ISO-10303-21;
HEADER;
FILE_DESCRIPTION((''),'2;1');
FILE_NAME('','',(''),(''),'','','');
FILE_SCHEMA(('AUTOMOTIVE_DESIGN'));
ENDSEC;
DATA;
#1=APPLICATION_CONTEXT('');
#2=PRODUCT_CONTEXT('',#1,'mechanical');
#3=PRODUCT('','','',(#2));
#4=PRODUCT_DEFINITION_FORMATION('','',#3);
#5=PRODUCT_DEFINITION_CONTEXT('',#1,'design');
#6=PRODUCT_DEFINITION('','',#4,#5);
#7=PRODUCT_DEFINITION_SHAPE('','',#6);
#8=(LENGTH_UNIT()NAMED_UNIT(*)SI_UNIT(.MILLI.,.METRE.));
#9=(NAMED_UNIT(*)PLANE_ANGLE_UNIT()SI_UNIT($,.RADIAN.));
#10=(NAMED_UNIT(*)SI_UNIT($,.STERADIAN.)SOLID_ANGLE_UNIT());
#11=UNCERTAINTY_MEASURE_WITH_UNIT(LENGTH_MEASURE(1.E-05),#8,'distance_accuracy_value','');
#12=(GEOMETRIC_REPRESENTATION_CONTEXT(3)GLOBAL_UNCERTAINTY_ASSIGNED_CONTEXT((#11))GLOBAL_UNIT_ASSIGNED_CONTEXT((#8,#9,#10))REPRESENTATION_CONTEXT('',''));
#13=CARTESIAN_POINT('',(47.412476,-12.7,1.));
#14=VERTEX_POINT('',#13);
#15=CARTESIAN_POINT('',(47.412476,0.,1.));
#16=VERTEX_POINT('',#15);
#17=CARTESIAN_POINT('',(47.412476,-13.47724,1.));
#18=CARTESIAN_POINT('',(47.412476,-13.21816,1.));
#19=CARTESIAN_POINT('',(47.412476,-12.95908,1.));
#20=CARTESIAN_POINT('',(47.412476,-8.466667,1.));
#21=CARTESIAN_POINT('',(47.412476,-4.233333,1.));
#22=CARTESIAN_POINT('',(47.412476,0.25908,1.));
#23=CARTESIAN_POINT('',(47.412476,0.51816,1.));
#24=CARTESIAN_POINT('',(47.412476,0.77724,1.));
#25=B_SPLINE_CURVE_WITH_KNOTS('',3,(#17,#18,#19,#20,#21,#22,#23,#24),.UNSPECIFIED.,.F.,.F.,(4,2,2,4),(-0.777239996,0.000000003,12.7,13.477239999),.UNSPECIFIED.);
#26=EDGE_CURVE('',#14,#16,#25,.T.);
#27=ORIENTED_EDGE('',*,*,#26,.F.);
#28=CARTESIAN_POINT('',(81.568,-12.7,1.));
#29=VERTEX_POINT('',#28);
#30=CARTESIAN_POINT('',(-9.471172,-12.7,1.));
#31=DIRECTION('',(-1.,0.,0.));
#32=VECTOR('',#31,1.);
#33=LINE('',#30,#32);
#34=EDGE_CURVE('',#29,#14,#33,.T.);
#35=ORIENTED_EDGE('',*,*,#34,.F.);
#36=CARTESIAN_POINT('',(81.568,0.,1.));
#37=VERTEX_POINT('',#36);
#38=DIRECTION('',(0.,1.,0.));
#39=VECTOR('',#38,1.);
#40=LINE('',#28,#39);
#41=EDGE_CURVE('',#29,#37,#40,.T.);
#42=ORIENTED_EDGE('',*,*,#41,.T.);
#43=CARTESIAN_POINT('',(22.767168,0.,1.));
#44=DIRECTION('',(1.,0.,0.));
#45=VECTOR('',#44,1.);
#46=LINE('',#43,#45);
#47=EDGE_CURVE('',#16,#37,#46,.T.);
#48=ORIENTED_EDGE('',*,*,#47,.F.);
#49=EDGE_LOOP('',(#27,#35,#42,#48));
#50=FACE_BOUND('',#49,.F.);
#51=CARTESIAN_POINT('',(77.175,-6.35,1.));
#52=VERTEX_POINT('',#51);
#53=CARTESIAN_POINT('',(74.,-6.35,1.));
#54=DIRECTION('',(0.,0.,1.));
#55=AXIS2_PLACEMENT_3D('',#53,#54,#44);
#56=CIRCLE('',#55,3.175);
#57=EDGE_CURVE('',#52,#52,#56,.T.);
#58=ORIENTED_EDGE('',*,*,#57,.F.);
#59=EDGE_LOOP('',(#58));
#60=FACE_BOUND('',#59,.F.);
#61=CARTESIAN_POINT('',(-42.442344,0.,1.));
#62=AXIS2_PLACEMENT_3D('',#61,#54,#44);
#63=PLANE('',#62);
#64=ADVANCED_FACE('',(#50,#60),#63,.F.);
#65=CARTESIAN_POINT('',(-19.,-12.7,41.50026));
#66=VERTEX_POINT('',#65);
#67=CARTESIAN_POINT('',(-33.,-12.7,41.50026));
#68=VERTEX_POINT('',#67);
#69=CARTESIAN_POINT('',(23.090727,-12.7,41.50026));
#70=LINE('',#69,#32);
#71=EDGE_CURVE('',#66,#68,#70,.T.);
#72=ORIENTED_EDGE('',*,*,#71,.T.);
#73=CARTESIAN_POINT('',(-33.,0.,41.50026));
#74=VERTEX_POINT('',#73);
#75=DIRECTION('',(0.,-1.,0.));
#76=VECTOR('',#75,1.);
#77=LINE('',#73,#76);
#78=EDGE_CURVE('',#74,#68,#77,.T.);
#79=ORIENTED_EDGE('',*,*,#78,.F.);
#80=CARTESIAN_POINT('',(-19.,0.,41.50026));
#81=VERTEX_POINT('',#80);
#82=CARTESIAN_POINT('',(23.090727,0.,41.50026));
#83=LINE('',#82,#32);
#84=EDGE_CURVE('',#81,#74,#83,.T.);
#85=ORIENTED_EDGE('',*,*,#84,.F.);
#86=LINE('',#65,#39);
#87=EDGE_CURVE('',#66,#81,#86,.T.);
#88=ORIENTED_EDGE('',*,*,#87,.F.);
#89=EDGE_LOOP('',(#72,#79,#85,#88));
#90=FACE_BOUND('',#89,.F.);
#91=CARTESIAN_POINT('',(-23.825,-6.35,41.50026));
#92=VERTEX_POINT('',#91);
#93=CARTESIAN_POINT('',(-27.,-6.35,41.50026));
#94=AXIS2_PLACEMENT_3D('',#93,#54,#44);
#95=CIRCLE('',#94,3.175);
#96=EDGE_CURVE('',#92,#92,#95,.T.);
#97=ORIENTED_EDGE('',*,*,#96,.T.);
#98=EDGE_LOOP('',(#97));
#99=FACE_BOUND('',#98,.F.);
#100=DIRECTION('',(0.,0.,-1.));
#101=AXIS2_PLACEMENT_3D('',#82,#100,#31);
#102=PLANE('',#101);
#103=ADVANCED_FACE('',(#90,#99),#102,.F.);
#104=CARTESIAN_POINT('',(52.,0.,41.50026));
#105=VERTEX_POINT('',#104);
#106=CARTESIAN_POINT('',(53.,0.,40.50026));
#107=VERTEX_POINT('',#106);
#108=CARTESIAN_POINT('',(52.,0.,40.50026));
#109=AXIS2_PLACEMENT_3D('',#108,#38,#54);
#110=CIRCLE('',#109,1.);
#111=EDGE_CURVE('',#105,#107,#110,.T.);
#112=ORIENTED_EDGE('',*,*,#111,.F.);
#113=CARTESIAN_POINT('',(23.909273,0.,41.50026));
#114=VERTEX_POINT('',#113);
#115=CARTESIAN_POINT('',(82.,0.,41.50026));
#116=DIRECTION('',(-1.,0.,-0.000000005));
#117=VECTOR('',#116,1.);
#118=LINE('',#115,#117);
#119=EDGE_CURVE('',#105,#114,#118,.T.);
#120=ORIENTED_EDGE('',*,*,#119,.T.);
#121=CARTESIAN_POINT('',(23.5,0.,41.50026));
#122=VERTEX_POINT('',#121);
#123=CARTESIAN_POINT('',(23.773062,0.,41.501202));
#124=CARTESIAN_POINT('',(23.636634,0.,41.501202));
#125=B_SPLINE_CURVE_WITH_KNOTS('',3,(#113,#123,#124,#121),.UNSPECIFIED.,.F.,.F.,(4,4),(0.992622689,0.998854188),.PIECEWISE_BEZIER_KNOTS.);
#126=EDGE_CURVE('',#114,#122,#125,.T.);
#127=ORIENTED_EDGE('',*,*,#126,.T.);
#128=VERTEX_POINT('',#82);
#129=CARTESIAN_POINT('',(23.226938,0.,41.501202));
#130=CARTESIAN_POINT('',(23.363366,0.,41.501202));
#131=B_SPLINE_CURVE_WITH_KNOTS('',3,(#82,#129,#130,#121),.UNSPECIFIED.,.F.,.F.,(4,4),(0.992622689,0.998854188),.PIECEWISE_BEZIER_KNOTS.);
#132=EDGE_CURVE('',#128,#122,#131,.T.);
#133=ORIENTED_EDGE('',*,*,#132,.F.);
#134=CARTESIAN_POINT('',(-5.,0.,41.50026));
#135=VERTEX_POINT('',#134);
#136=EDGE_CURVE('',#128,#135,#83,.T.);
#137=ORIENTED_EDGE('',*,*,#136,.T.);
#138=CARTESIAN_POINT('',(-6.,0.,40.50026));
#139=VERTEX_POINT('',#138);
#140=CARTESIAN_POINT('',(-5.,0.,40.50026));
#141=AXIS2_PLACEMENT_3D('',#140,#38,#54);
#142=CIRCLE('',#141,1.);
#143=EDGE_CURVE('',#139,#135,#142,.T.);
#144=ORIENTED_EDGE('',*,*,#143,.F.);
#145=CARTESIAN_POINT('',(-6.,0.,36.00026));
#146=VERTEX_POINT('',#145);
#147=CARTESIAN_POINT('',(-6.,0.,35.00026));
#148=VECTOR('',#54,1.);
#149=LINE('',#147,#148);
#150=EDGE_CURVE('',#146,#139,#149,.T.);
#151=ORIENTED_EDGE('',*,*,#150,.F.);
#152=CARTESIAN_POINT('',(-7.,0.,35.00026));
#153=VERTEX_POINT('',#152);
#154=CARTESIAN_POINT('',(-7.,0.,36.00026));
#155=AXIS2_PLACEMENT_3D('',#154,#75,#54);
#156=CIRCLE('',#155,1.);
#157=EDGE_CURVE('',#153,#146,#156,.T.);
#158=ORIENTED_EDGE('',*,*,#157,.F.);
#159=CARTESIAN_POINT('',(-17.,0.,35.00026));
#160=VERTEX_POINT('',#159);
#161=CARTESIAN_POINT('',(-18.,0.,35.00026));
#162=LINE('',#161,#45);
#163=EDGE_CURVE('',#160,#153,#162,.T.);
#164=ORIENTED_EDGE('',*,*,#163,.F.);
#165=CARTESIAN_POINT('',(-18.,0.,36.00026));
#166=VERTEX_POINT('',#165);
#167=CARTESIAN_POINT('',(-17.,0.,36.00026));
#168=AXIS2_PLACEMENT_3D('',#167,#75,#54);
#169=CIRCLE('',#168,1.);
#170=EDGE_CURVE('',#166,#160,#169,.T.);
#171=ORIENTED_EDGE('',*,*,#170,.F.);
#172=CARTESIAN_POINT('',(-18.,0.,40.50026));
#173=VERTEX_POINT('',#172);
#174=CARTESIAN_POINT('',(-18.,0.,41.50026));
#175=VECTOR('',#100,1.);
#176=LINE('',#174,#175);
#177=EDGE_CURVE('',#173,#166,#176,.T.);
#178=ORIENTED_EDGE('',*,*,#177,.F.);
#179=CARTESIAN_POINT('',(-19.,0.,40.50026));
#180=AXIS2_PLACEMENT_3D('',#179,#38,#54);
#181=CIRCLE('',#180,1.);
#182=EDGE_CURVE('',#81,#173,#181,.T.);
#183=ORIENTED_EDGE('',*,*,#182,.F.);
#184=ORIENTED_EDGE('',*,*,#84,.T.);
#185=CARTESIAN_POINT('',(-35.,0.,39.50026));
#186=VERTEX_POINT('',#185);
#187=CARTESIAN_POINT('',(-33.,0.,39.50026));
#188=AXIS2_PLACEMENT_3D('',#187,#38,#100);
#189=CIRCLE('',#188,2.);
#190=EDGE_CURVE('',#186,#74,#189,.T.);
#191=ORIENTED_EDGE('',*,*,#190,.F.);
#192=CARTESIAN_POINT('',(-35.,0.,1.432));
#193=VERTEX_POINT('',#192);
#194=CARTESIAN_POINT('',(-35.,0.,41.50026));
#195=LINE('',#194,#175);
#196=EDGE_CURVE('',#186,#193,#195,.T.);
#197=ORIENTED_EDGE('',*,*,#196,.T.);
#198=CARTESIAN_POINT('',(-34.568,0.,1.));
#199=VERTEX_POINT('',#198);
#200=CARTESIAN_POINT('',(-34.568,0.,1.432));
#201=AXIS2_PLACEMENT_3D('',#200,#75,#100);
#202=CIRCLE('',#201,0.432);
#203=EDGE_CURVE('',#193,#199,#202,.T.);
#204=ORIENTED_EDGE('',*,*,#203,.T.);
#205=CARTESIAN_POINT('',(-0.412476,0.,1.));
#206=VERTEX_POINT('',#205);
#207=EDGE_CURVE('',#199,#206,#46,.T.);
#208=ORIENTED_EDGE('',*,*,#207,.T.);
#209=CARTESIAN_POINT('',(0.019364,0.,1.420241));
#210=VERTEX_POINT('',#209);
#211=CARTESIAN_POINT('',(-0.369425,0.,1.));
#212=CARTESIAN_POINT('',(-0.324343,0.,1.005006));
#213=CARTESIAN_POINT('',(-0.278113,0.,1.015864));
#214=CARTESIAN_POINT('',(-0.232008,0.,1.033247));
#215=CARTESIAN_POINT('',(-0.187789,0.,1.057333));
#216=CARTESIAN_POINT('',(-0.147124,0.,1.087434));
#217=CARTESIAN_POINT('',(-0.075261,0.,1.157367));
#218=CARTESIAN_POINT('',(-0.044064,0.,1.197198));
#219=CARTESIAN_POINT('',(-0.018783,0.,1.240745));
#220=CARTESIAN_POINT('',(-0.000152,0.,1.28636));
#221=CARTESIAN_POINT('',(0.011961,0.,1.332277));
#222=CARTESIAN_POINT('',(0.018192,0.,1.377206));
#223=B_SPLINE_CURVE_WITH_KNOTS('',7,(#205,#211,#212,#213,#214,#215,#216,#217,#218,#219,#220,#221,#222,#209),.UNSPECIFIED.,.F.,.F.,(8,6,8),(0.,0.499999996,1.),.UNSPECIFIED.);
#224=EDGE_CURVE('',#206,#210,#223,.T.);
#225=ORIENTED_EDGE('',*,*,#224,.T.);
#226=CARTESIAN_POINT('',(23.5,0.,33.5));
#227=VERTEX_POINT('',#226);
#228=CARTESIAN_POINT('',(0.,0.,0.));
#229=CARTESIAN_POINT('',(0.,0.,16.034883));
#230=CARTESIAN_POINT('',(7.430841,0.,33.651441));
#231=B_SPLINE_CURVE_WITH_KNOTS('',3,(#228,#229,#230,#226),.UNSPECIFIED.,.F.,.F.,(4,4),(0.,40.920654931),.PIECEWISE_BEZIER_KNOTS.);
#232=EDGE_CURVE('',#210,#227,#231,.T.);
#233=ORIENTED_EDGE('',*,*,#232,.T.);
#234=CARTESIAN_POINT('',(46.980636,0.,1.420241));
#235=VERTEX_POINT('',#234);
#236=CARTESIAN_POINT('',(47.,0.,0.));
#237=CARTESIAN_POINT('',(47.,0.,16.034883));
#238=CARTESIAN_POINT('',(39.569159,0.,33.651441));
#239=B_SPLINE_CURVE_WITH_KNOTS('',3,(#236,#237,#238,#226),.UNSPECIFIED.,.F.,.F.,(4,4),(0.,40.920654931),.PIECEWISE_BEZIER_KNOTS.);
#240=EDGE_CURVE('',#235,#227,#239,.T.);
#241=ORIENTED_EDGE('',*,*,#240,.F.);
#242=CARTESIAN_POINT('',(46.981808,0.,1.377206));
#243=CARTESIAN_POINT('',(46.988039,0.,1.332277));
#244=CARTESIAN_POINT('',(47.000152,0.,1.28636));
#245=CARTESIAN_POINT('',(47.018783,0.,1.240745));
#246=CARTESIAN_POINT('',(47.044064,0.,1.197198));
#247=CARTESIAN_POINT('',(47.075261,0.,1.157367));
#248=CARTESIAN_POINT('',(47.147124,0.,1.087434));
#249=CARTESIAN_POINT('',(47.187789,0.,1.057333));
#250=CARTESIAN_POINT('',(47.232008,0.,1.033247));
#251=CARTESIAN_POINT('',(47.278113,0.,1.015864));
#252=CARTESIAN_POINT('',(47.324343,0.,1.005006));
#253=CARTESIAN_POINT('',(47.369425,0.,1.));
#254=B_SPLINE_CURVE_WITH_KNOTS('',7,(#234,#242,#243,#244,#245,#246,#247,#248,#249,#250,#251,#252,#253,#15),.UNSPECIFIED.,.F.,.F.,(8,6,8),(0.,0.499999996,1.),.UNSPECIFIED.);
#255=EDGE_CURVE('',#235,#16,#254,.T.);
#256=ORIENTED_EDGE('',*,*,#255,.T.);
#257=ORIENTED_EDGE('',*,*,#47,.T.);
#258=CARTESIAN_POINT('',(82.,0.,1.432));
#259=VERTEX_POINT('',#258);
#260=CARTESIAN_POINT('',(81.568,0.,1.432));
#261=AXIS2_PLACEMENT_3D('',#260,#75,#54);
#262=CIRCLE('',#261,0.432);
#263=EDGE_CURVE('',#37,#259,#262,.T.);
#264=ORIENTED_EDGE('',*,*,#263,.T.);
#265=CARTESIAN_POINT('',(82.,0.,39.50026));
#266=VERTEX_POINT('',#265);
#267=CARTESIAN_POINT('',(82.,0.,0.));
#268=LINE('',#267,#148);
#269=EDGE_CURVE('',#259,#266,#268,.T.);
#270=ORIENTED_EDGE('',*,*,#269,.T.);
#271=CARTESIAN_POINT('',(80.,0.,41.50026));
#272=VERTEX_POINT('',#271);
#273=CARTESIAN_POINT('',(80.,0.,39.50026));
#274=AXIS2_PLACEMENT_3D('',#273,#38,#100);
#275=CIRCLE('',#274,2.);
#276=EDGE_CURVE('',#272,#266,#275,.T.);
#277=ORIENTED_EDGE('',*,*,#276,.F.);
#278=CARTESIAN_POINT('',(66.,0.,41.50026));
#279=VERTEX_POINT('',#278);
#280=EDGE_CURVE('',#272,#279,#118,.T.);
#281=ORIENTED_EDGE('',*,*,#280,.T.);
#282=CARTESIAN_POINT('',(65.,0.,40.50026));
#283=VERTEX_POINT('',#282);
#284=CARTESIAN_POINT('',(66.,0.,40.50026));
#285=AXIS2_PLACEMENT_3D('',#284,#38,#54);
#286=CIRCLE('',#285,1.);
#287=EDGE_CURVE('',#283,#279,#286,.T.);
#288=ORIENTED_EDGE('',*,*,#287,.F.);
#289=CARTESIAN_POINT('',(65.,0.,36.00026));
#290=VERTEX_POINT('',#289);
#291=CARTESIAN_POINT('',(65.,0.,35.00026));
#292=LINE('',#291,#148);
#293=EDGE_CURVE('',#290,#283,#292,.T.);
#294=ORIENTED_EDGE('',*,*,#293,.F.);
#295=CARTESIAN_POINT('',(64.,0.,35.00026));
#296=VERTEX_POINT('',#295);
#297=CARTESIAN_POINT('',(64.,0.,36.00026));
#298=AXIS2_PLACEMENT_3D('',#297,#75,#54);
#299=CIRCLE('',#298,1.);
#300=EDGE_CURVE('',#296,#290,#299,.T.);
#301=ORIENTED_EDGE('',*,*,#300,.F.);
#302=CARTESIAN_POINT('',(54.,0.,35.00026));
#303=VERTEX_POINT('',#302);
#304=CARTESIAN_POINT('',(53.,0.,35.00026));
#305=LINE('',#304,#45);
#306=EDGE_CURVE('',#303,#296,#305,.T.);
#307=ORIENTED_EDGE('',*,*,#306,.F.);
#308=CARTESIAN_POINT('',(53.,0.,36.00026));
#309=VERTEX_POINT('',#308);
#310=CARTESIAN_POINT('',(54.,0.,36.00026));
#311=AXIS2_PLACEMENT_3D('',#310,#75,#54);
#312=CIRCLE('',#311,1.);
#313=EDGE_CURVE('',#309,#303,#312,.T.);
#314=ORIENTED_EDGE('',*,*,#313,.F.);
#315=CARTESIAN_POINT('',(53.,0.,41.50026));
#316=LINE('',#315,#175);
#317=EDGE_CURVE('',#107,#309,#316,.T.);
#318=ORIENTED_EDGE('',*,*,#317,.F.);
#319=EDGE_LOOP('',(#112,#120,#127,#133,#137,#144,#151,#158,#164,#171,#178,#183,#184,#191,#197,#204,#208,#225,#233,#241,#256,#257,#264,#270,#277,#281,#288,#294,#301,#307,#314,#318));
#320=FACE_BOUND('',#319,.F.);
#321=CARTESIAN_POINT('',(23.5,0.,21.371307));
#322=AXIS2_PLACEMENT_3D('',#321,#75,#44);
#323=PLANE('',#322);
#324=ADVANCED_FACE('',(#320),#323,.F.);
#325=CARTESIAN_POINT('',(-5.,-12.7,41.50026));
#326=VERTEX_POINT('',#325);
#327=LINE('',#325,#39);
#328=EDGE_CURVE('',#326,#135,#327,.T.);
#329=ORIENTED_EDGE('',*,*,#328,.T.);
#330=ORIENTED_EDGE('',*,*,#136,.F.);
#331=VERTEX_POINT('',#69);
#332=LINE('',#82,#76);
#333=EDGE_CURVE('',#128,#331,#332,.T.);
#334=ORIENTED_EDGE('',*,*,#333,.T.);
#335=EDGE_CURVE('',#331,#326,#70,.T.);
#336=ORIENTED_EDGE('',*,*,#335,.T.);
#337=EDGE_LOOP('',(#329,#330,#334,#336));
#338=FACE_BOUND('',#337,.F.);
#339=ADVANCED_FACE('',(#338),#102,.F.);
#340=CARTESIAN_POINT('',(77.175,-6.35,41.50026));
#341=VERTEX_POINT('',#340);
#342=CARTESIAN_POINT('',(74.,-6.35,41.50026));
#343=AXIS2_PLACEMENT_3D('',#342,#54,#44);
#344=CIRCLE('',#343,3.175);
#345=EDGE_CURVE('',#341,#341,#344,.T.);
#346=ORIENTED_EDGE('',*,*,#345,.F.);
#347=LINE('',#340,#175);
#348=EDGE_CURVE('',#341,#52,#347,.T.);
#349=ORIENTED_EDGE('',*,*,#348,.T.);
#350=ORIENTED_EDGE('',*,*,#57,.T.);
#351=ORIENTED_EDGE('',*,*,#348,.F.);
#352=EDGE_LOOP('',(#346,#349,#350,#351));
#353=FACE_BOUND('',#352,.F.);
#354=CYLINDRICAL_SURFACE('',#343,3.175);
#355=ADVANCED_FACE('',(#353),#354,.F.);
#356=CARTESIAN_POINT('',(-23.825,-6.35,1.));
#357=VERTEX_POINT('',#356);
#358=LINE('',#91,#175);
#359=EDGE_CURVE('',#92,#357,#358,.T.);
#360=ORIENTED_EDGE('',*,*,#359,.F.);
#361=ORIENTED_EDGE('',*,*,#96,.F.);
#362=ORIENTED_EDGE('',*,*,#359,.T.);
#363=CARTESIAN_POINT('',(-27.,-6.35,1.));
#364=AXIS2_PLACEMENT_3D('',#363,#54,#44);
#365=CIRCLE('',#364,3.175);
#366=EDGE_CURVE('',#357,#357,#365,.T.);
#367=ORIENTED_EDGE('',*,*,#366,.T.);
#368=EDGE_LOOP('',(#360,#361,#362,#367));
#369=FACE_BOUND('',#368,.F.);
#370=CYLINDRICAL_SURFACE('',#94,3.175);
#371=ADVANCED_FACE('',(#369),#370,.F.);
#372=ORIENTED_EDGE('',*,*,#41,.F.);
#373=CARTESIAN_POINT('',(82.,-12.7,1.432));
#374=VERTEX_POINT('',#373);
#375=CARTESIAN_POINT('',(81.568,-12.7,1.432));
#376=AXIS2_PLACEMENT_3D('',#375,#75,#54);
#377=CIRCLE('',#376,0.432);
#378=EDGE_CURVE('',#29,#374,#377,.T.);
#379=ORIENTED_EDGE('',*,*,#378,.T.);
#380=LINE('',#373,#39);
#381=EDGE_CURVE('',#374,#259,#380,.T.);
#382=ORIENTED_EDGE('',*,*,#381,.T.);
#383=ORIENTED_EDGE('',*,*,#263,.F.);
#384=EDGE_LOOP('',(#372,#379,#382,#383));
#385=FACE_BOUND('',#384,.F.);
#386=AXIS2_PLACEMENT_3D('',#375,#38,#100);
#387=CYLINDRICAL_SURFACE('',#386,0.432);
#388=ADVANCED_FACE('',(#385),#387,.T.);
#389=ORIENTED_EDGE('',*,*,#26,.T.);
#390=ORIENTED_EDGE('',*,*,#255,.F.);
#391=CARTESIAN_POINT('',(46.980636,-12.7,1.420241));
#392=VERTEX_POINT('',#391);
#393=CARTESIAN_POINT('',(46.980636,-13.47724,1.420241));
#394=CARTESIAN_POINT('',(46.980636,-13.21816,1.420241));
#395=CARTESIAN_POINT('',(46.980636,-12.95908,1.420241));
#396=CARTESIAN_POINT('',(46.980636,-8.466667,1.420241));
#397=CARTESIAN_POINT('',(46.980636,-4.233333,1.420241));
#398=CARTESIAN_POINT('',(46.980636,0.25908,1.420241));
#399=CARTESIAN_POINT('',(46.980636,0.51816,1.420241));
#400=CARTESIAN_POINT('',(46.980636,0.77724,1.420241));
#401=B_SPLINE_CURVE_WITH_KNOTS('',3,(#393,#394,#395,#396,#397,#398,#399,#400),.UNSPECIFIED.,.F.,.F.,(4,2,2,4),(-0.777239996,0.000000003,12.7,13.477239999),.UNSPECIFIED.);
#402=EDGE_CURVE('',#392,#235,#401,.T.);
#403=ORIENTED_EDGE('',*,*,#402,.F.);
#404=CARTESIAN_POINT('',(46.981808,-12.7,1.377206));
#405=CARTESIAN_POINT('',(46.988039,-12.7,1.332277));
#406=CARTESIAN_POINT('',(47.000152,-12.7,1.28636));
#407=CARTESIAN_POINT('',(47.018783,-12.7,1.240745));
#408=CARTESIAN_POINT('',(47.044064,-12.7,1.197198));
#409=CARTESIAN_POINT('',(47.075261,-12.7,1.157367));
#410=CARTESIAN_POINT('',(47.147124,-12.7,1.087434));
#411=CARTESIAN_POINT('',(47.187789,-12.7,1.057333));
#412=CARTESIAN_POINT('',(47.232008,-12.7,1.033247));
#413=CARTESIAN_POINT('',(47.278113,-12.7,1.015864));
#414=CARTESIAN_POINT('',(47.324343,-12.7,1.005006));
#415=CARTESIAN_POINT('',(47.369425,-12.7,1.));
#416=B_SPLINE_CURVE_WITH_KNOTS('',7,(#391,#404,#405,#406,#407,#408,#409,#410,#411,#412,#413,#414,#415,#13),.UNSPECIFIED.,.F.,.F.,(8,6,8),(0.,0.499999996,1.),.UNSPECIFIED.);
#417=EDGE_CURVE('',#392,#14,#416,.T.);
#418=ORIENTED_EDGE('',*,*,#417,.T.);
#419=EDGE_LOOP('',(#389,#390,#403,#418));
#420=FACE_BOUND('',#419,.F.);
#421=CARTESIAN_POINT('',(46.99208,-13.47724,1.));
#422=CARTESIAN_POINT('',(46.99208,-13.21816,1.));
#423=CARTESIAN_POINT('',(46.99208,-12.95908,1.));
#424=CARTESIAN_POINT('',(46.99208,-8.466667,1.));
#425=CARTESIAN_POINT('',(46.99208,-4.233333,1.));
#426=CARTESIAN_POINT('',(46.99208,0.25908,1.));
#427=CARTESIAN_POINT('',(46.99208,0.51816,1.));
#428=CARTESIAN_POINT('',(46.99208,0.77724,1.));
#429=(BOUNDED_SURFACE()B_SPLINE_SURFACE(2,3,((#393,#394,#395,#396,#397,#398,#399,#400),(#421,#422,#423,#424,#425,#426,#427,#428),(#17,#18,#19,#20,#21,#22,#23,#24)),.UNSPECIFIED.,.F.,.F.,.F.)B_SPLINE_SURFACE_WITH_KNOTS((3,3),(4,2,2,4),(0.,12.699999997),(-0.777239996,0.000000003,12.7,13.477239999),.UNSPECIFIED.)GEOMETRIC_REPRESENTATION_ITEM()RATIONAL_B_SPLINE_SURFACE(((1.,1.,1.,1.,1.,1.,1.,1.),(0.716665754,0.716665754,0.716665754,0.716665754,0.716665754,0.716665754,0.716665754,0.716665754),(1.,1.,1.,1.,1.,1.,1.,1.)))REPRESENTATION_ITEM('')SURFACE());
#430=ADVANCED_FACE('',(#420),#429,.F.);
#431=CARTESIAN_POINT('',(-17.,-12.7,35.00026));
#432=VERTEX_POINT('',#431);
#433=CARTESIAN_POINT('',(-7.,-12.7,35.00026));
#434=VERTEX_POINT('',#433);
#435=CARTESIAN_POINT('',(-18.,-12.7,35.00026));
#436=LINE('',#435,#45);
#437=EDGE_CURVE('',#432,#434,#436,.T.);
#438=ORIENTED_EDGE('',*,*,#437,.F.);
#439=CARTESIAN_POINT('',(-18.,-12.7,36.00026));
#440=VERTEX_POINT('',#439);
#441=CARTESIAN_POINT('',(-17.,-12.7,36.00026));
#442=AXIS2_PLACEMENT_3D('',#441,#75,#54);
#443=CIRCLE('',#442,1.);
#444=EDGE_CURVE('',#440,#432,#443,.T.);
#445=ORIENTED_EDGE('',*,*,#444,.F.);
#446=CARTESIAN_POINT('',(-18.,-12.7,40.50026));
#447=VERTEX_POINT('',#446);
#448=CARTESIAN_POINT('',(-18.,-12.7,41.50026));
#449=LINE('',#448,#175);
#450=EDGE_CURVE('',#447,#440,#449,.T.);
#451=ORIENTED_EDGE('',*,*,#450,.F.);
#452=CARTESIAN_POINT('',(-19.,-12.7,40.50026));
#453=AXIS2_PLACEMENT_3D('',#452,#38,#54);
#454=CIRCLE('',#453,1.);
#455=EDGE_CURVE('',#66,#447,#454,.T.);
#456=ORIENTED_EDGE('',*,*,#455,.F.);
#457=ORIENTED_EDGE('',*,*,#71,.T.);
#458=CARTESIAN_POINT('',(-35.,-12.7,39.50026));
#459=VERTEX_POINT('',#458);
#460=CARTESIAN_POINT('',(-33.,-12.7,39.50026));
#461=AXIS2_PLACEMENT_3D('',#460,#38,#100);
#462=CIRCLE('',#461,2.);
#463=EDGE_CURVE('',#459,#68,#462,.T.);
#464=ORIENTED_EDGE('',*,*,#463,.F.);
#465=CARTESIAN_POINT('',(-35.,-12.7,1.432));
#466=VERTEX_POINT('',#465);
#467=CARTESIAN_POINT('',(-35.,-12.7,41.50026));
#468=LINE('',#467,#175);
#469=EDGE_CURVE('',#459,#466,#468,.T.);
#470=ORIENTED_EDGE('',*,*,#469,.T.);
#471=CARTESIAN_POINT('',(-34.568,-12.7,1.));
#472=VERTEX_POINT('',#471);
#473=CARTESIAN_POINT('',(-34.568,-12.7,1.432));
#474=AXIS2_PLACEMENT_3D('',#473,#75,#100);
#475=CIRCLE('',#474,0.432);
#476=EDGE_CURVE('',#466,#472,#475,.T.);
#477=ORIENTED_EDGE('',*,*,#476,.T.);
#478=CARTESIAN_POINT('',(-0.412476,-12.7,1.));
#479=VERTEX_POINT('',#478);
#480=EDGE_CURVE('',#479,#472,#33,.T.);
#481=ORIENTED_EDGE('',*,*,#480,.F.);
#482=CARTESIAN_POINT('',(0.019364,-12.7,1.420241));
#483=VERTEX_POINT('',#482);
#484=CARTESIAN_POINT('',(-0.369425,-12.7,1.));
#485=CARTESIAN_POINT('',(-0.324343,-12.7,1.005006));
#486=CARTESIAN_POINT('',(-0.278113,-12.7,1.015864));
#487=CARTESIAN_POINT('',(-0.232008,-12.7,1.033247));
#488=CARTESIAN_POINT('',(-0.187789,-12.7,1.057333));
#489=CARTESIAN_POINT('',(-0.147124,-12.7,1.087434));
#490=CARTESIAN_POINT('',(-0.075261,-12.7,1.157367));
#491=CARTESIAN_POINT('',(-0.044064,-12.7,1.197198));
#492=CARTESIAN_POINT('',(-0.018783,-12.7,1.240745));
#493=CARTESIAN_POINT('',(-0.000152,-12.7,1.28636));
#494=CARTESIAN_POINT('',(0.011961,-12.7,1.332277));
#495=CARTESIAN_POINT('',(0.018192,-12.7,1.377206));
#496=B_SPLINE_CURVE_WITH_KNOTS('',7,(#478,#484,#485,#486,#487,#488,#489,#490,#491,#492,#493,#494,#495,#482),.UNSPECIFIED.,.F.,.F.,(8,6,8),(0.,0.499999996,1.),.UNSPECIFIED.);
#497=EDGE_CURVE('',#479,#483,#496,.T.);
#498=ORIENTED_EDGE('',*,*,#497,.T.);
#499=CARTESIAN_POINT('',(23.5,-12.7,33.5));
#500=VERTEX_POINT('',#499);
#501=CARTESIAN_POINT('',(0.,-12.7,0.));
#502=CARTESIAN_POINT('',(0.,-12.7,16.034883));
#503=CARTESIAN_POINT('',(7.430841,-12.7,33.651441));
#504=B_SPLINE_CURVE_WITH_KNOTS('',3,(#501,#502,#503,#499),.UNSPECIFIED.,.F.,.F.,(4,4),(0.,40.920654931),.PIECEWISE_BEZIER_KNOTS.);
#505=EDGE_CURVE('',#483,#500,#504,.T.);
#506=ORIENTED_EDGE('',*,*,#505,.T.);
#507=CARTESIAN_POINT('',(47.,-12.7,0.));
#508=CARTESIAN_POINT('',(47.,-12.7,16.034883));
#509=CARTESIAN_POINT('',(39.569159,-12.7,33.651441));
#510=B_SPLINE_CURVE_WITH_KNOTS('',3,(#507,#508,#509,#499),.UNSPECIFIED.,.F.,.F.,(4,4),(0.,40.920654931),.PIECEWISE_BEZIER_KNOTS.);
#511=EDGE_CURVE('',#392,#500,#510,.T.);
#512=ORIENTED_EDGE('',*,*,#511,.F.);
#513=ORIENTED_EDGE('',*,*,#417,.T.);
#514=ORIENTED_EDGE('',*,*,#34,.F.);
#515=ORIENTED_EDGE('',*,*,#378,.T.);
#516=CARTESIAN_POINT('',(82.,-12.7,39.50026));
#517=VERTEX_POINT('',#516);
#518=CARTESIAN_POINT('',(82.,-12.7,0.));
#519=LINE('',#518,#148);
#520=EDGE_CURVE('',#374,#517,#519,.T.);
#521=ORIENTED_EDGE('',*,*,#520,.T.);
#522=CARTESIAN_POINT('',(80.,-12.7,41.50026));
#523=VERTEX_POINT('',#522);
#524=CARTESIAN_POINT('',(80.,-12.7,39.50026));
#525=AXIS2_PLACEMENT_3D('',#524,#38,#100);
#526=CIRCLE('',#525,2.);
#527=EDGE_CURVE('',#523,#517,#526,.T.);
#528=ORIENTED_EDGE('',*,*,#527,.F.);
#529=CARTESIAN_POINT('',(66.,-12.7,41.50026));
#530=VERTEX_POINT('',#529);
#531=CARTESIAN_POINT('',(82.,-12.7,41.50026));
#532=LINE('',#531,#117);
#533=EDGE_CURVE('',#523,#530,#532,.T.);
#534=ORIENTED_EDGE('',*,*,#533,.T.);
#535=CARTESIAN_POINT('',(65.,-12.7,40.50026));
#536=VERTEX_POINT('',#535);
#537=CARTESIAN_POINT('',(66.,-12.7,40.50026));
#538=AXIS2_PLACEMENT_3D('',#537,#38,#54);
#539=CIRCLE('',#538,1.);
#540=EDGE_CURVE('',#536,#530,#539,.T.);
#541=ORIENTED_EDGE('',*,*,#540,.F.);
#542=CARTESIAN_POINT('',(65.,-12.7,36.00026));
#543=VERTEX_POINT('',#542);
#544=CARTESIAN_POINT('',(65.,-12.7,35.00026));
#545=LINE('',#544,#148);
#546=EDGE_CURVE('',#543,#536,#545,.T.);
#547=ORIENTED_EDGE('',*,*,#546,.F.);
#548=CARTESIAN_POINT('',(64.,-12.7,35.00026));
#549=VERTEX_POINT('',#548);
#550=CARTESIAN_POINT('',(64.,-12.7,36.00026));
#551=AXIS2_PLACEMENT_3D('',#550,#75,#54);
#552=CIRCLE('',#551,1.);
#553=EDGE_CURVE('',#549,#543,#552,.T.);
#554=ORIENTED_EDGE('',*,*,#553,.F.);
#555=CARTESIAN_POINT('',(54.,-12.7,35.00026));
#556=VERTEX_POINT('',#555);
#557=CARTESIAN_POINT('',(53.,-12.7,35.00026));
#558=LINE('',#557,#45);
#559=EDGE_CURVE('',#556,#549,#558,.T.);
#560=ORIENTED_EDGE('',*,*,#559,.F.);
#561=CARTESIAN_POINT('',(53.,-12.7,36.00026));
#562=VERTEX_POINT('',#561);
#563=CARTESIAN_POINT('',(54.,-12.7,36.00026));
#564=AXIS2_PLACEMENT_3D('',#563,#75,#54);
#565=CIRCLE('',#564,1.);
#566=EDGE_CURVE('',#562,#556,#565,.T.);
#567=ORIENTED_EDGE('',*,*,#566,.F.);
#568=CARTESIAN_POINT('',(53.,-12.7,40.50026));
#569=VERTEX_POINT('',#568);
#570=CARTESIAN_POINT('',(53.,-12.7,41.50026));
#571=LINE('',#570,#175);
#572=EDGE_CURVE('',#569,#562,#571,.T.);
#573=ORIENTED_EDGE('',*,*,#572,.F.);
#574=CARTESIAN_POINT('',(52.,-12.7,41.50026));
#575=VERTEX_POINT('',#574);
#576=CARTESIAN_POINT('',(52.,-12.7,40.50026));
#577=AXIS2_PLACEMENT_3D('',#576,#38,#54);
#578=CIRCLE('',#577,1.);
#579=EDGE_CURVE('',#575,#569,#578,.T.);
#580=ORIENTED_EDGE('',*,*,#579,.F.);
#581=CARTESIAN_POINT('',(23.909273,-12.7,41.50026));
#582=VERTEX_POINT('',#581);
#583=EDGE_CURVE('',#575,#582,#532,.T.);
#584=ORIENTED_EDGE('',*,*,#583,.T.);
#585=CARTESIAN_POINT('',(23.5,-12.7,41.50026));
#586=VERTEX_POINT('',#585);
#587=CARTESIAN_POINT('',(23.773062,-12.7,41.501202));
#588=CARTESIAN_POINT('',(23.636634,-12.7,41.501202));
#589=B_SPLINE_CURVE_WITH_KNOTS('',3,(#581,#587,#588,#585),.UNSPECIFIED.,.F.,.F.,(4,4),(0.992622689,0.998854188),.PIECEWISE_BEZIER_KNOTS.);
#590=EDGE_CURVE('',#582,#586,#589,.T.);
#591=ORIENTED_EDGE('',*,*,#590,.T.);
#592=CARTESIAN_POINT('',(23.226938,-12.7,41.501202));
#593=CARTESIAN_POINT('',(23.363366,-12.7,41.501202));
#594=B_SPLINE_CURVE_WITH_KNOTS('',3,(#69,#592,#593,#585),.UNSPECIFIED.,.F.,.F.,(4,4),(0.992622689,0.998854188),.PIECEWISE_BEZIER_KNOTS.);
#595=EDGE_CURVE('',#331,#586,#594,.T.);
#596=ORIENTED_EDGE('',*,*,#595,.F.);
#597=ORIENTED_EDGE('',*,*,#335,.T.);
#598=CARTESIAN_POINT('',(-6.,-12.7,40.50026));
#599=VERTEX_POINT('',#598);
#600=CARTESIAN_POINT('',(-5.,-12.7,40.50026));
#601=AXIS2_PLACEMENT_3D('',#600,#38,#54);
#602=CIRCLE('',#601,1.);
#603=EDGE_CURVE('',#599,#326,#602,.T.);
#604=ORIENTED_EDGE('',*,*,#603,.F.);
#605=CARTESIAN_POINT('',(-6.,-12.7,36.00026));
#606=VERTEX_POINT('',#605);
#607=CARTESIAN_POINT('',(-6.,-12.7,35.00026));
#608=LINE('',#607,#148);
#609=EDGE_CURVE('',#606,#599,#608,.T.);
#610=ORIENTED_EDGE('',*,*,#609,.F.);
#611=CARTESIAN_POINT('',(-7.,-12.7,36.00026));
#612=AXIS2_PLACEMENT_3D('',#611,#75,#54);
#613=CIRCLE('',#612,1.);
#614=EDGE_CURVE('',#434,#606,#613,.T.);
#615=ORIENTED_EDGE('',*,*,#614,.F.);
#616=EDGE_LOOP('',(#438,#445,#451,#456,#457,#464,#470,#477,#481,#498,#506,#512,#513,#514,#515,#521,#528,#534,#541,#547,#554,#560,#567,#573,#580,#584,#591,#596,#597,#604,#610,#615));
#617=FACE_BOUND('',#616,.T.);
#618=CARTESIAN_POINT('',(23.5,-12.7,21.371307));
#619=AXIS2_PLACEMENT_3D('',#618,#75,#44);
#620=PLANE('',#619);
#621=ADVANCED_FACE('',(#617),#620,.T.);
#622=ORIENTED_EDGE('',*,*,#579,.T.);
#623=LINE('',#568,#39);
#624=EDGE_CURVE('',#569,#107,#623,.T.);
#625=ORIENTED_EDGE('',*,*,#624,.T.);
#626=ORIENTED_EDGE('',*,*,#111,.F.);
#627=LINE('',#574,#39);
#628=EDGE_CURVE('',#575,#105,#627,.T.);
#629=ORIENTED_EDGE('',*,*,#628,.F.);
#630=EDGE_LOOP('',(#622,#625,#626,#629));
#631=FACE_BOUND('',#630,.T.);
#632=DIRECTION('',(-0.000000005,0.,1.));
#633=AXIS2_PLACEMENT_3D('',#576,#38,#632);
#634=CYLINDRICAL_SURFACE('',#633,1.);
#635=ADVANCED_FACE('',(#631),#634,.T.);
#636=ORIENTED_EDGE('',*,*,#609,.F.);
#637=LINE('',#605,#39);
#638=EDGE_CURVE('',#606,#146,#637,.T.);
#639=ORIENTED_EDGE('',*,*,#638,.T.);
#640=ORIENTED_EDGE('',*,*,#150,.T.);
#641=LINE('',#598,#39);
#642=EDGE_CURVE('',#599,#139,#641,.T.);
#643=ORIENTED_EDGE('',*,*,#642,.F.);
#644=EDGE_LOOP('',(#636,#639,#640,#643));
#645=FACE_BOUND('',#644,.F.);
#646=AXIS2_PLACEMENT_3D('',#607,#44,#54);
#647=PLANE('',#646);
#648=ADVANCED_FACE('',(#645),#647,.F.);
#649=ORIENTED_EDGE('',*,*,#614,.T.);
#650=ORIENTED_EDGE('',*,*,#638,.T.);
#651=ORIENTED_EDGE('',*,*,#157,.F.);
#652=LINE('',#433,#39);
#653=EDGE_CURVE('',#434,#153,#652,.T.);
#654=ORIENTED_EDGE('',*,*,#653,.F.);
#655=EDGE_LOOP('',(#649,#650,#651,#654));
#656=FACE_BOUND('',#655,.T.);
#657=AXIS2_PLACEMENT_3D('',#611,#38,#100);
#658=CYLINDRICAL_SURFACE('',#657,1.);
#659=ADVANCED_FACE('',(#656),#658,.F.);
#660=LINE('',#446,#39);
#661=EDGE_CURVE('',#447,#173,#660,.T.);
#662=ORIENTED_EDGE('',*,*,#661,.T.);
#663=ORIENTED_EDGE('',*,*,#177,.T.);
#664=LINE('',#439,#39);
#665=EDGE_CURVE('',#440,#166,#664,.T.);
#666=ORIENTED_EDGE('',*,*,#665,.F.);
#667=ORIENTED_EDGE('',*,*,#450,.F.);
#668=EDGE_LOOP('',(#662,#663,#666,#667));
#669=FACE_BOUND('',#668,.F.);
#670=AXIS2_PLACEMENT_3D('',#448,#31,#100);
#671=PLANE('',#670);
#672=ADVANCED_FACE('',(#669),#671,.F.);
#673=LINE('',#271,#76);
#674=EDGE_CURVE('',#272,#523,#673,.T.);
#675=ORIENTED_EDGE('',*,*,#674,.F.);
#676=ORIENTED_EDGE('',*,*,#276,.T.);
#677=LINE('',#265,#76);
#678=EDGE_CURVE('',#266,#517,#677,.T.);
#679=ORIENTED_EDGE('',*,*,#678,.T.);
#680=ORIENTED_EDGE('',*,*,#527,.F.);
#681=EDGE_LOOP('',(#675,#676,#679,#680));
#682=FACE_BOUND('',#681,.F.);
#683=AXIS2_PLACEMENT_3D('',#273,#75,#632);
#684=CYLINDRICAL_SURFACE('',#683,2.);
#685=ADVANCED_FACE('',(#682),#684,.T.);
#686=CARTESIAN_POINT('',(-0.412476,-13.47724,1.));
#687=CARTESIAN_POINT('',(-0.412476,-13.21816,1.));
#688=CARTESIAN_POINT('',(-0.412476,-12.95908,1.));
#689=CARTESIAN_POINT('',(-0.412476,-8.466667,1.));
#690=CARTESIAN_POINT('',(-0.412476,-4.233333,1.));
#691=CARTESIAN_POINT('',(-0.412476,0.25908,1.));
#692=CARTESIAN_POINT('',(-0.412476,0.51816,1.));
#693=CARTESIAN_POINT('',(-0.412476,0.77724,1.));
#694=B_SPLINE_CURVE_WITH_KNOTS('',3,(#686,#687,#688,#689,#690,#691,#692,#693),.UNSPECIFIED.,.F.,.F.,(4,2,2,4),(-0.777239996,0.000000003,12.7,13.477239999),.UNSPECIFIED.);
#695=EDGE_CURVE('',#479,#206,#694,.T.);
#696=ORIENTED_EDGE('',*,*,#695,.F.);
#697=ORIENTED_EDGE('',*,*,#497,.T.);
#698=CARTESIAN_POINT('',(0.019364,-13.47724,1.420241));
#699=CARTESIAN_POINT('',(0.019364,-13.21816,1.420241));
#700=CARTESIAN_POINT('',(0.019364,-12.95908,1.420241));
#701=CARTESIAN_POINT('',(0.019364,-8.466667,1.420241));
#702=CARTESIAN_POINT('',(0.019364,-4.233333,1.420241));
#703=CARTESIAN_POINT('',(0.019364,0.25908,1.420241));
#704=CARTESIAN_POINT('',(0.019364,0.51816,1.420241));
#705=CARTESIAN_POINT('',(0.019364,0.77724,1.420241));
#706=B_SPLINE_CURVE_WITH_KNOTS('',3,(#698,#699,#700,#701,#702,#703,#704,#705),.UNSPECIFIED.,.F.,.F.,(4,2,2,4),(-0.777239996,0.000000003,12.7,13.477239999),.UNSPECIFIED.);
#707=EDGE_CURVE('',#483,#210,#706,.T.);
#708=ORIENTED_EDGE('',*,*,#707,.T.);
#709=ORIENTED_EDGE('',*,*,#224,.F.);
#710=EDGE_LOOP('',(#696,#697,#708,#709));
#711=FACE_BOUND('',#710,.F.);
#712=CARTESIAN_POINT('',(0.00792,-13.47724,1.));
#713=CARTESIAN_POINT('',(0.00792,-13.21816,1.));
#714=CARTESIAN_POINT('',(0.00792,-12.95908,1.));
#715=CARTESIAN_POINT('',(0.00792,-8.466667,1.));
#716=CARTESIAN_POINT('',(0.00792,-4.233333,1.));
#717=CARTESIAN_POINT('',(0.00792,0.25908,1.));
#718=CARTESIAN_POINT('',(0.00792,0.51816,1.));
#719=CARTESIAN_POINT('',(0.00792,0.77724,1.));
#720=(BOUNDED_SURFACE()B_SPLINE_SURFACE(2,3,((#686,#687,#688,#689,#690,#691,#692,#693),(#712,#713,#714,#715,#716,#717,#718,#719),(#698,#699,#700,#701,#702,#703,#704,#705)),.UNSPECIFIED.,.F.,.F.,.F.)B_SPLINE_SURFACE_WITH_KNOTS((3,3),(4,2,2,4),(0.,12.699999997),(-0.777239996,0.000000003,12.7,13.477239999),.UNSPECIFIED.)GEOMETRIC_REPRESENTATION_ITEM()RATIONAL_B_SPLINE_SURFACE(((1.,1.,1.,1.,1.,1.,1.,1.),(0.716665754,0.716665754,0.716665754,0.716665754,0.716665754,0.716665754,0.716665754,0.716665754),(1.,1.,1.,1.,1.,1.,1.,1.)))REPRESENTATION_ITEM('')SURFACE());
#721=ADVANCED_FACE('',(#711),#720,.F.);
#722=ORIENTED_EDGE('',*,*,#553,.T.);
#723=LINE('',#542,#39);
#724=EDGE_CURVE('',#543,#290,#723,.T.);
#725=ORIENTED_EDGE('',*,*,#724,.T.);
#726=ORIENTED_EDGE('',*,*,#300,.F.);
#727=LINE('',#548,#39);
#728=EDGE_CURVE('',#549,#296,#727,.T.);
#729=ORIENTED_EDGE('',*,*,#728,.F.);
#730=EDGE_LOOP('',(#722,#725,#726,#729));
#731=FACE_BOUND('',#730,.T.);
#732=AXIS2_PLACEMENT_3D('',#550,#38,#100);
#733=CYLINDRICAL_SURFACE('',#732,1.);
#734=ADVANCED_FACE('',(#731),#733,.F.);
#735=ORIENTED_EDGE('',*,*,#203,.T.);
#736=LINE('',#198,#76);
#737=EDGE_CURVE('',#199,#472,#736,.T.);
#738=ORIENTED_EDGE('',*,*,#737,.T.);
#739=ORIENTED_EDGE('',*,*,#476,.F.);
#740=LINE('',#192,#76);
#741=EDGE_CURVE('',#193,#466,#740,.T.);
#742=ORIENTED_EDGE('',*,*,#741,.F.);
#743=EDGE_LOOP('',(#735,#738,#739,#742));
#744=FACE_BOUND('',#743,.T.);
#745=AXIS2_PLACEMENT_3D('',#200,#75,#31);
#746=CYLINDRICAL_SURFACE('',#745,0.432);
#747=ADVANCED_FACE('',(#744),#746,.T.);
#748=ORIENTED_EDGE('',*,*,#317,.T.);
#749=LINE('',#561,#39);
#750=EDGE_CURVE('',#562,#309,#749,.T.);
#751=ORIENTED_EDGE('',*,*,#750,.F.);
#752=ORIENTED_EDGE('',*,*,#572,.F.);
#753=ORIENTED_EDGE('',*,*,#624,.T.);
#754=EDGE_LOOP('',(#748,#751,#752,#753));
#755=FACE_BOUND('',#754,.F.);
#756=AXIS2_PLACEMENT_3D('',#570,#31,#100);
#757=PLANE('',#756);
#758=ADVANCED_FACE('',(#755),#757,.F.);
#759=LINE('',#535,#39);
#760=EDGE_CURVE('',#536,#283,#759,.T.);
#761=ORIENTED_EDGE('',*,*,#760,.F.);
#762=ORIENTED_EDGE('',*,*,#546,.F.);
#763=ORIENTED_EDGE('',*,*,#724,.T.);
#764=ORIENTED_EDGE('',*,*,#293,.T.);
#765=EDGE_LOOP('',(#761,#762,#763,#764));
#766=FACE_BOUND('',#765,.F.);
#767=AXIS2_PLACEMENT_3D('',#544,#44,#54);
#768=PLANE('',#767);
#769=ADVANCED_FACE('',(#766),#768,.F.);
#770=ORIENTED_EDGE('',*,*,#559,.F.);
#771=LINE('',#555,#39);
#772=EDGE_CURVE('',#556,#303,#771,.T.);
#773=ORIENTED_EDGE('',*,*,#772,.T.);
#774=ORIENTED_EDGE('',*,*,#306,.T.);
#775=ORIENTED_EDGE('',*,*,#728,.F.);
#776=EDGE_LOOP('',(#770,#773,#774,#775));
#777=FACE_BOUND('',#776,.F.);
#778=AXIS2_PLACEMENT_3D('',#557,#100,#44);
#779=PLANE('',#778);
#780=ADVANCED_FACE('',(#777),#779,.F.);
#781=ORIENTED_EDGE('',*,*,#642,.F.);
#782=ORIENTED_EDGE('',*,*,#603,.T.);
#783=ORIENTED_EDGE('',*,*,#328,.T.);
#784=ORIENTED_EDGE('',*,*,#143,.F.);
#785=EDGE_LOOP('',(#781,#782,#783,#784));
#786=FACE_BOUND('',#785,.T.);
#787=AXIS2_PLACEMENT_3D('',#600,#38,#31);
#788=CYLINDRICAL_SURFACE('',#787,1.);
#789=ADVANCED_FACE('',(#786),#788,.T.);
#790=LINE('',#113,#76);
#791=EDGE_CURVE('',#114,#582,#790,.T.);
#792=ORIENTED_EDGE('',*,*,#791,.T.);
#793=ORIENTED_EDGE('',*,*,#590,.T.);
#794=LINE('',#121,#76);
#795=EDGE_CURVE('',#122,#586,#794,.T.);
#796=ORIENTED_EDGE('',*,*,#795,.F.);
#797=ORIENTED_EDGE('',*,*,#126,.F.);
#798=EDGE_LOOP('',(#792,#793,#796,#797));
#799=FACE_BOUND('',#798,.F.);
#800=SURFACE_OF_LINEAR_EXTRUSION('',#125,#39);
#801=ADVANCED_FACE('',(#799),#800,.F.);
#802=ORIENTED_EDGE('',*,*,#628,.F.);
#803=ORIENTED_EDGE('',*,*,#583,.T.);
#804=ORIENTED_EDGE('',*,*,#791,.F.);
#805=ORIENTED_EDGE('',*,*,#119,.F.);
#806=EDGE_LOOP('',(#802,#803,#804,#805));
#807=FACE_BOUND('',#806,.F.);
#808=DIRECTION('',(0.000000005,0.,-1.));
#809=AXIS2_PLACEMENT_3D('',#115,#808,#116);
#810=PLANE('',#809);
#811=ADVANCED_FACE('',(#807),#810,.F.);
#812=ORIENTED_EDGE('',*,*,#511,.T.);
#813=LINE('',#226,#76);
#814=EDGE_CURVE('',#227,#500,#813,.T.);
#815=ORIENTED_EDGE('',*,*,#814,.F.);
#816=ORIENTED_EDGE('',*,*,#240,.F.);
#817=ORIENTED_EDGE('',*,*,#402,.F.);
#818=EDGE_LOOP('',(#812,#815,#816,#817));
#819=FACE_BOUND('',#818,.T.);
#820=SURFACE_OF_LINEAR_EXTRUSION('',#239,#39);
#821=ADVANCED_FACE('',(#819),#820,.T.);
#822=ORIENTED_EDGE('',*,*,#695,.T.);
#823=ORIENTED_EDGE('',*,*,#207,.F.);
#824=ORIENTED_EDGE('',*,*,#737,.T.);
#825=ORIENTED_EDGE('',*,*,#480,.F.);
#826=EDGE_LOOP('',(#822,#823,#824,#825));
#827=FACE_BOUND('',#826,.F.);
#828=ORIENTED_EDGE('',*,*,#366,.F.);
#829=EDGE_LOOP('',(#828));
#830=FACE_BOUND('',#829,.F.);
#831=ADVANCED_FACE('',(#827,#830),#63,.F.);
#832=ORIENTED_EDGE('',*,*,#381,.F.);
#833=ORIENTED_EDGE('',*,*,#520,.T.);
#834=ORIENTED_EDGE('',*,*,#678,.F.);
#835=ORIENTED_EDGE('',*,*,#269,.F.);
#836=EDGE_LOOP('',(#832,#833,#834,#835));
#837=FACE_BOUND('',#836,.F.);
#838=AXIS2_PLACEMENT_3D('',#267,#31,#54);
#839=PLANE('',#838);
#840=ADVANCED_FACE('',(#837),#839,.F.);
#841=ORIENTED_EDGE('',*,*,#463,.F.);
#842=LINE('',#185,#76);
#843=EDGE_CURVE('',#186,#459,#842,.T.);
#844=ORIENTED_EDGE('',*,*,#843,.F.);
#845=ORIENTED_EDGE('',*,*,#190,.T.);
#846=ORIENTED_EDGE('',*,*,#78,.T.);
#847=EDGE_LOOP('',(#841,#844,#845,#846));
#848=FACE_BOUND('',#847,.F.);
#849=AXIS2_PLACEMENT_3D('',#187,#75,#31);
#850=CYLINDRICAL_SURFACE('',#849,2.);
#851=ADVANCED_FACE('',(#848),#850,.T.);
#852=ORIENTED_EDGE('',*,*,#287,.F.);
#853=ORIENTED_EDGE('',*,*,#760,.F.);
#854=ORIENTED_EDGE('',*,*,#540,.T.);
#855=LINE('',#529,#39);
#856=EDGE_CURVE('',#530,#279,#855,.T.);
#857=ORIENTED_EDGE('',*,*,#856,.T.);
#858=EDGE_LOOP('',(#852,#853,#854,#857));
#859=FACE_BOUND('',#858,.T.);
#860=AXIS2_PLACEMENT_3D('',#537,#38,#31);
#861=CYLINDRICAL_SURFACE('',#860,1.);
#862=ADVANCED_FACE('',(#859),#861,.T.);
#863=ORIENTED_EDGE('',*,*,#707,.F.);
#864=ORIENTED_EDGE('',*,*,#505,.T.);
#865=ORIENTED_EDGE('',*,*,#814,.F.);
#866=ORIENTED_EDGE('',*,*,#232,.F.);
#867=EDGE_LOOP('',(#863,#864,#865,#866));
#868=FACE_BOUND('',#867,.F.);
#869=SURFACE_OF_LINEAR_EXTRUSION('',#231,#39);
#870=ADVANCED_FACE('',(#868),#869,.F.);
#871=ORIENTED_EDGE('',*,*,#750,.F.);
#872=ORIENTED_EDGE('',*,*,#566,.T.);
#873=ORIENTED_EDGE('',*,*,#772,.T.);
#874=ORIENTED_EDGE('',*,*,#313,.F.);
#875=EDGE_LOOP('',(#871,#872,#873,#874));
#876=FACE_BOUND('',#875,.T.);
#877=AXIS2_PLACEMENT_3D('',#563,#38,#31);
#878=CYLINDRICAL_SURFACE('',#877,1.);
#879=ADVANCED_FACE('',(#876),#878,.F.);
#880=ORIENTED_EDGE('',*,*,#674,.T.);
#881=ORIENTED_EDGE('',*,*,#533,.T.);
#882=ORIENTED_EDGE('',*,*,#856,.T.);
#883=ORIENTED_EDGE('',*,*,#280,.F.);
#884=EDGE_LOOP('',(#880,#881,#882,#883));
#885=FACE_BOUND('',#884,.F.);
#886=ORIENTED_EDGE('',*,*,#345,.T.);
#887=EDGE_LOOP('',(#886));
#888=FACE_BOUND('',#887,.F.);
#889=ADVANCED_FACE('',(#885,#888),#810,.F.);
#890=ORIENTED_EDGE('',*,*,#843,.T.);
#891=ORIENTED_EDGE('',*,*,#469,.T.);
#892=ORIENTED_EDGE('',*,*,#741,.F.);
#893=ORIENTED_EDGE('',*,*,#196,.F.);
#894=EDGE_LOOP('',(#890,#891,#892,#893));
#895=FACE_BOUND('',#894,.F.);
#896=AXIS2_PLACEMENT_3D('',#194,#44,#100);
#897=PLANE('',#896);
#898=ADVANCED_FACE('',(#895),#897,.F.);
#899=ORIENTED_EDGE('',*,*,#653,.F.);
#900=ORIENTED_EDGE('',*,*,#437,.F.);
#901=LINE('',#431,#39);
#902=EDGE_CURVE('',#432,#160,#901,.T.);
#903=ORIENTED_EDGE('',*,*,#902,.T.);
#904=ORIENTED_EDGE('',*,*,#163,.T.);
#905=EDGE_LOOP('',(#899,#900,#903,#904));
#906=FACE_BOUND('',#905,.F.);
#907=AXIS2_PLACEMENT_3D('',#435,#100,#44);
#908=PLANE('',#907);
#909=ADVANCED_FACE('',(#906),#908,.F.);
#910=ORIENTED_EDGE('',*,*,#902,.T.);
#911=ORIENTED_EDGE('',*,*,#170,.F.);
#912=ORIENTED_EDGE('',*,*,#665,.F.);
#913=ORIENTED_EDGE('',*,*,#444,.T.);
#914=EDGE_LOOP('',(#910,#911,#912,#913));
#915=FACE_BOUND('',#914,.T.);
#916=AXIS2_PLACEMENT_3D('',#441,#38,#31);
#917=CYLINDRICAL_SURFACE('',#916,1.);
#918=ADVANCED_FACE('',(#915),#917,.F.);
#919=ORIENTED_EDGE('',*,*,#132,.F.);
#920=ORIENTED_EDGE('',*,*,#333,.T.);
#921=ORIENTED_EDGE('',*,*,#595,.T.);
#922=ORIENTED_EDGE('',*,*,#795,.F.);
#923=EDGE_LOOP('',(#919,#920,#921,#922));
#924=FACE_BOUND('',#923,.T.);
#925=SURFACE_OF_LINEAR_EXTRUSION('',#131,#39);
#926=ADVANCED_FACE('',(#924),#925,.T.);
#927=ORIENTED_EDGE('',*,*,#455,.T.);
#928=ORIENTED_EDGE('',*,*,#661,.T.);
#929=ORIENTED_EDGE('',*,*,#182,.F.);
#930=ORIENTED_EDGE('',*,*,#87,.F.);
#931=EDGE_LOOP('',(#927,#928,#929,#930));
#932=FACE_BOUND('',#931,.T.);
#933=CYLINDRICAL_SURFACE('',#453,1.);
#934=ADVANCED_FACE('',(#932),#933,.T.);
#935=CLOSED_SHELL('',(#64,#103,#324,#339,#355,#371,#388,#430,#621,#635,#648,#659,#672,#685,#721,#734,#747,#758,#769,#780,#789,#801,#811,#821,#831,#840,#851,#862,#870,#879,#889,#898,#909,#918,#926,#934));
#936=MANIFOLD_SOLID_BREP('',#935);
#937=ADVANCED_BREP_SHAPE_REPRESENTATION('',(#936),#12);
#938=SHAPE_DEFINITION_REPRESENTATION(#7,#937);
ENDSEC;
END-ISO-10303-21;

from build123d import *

# Parameters (mm, degrees)
F1_DEPTH = 12.7
F2_R     = 3.175
F3_DEPTH = 41.5002601562
F4_W     = 130.419023335
F4_H     = 4.1049833633
F5_DEPTH = 25
F6_R     = 2
F7_R     = 0.432
F9_DEPTH = 12.7
F10_R    = 1


# Not quite as in the source:
# - ends of sketch curves that miss each other by under 0.0002 mm in the source are joined
# - the dataset's text gives a spline's control points without its knots; the knots are read off the source's solid


with BuildPart() as f1:
    # F0 (on Front) → F1 (new body)
    with BuildSketch(Plane.XZ):
        with BuildLine():
            Line((-8, 0), (0, 0))
            add(Edge.make_bspline(
                [(0, 0), (0, 16.0348825157), (7.430841215, 33.6514413357), (23.5, 33.5)],
                knots=[0, 0, 0, 0, 40.9206549312, 40.9206549312, 40.9206549312, 40.9206549312], degree=3))
            add(Edge.make_bspline(
                [(47, 0), (47, 16.0348825157), (39.569158785, 33.6514413357), (23.5, 33.5)],
                knots=[0, 0, 0, 0, 40.9206549312, 40.9206549312, 40.9206549312, 40.9206549312], degree=3))
            Line((47, 0), (55, 0))
            add(Edge.make_bspline(
                [(55, 0), (55, 2.3133051501), (54.8084752548, 5.6604865088), (54.3346414744, 8.9941225704), (54.1644875118, 10.0000161913)],
                knots=[0, 0, 0, 0, 0.125, 0.1792883855, 0.1792883855, 0.1792883855, 0.1792883855], degree=3))
            add(Edge.make_bspline(
                [(54.1644875118, 10.0000161913), (53.9428588652, 11.3102110198), (53.2041802455, 14.9199242801), (51.403557473, 20.6965522199), (48.312647429, 27.0635606249), (44.7757382973, 31.8590791464), (41.27501086, 35.2044913237), (38.3020149436, 37.39930019), (34.9881581098, 39.2038242784), (31.3670929719, 40.5407901401), (27.6491274865, 41.3170292606), (25.11417344, 41.4919330376), (23.9092731988, 41.5002601562)],
                knots=[0.1792883855, 0.1792883855, 0.1792883855, 0.1792883855, 0.25, 0.375, 0.5, 0.625, 0.6875, 0.75, 0.8125, 0.875, 0.9375, 0.9926226885, 0.9926226885, 0.9926226885, 0.9926226885], degree=3))
            Line((23.9092731988, 41.5002601562), (23.5, 41.5002601562))
            Line((23.5, 41.5002601562), (23.0907268012, 41.5002601562))
            add(Edge.make_bspline(
                [(-7.1644875118, 10.0000161913), (-6.9428588652, 11.3102110198), (-6.2041802455, 14.9199242801), (-4.403557473, 20.6965522199), (-1.312647429, 27.0635606249), (2.2242617027, 31.8590791464), (5.72498914, 35.2044913237), (8.6979850564, 37.39930019), (12.0118418902, 39.2038242784), (15.6329070281, 40.5407901401), (19.3508725135, 41.3170292606), (21.88582656, 41.4919330376), (23.0907268012, 41.5002601562)],
                knots=[0.1792883855, 0.1792883855, 0.1792883855, 0.1792883855, 0.25, 0.375, 0.5, 0.625, 0.6875, 0.75, 0.8125, 0.875, 0.9375, 0.9926226885, 0.9926226885, 0.9926226885, 0.9926226885], degree=3))
            add(Edge.make_bspline(
                [(-8, 0), (-8, 2.3133051501), (-7.8084752548, 5.6604865088), (-7.3346414744, 8.9941225704), (-7.1644875118, 10.0000161913)],
                knots=[0, 0, 0, 0, 0.125, 0.1792883855, 0.1792883855, 0.1792883855, 0.1792883855], degree=3))
        make_face()
        with BuildLine():
            Line((-35, 0), (-8, 0))
            add(Edge.make_bspline(
                [(-8, 0), (-8, 2.3133051501), (-7.8084752548, 5.6604865088), (-7.3346414744, 8.9941225704), (-7.1644875118, 10.0000161913)],
                knots=[0, 0, 0, 0, 0.125, 0.1792883855, 0.1792883855, 0.1792883855, 0.1792883855], degree=3))
            Line((-7.1644875118, 10.0000161913), (-35, 10))
            Line((-35, 10), (-35, 0))
        make_face()
        with BuildLine():
            Line((-35, 10), (-7.1643917939, 10))
            add(Edge.make_bspline(
                [(-7.1643917939, 10), (-6.9428588652, 11.3102110198), (-6.2041802455, 14.9199242801), (-4.403557473, 20.6965522199), (-1.312647429, 27.0635606249), (2.2242617027, 31.8590791464), (5.72498914, 35.2044913237), (8.6979850564, 37.39930019), (12.0118418902, 39.2038242784), (15.6329070281, 40.5407901401), (19.3508725135, 41.3170292606), (21.88582656, 41.4919330376), (23.0907268012, 41.5002601562)],
                knots=[0.1792883855, 0.1792883855, 0.1792883855, 0.1792883855, 0.25, 0.375, 0.5, 0.625, 0.6875, 0.75, 0.8125, 0.875, 0.9375, 0.9926226885, 0.9926226885, 0.9926226885, 0.9926226885], degree=3))
            Line((23.0907268012, 41.5002601562), (-12, 41.5002601562))
            Line((-12, 41.5002601562), (-12, 38.0002601562))
            Line((-12, 38.0002601562), (-15, 38.0002601562))
            Line((-15, 38.0002601562), (-18, 38.0002601562))
            Line((-18, 38.0002601562), (-18, 41.5002601562))
            Line((-18, 41.5002601562), (-35, 41.5002601562))
            Line((-35, 41.5002601562), (-35, 10))
        make_face()
        with BuildLine():
            add(Edge.make_bspline(
                [(55, 0), (55, 2.3133051501), (54.8084752548, 5.6604865088), (54.3346414744, 8.9941225704), (54.1644875118, 10.0000161913)],
                knots=[0, 0, 0, 0, 0.125, 0.1792883855, 0.1792883855, 0.1792883855, 0.1792883855], degree=3))
            Line((55, 0), (82, 0))
            Line((82, 0), (82, 10))
            Line((82, 10), (54.1644875118, 10.0000161913))
        make_face()
        with BuildLine():
            add(Edge.make_bspline(
                [(23.0907268012, 41.5002601562), (23.2269381476, 41.5012015188), (23.3633657228, 41.5012017791), (23.499999998, 41.5002598872)],
                knots=[0.9926226885, 0.9926226885, 0.9926226885, 0.9926226885, 0.9988541884, 0.9988541884, 0.9988541884, 0.9988541884], degree=3))
            Line((23.0907268012, 41.5002601562), (23.499999998, 41.5002598872))
        make_face()
        with BuildLine():
            add(Edge.make_bspline(
                [(54.1644875118, 10.0000161913), (53.9428588652, 11.3102110198), (53.2041802455, 14.9199242801), (51.403557473, 20.6965522199), (48.312647429, 27.0635606249), (44.7757382973, 31.8590791464), (41.27501086, 35.2044913237), (38.3020149436, 37.39930019), (34.9881581098, 39.2038242784), (31.3670929719, 40.5407901401), (27.6491274865, 41.3170292606), (25.11417344, 41.4919330376), (23.9092731988, 41.5002601562)],
                knots=[0.1792883855, 0.1792883855, 0.1792883855, 0.1792883855, 0.25, 0.375, 0.5, 0.625, 0.6875, 0.75, 0.8125, 0.875, 0.9375, 0.9926226885, 0.9926226885, 0.9926226885, 0.9926226885], degree=3))
            Line((54.1644875118, 10.0000161913), (82, 10))
            Line((82, 10), (82, 41.5002601562))
            Line((82, 41.5002601562), (23.9092731988, 41.5002601562))
        make_face()
        with BuildLine():
            add(Edge.make_bspline(
                [(23.9092731988, 41.5002601562), (23.7730618524, 41.5012015188), (23.6366342772, 41.5012017791), (23.500000002, 41.5002598872)],
                knots=[0.9926226885, 0.9926226885, 0.9926226885, 0.9926226885, 0.9988541884, 0.9988541884, 0.9988541884, 0.9988541884], degree=3))
            Line((23.500000002, 41.5002598872), (23.9092731988, 41.5002601562))
        make_face()
        Polygon((-12, 38.0002601562), (-12, 41.5002601562), (-15, 41.5002601562), (-18, 41.5002601562), (-18, 38.0002601562), (-15, 38.0002601562), align=None)
    extrude(amount=F1_DEPTH)

    # F2 (on face) → F3 (cut, through all)
    with BuildSketch(Plane.XY.offset(41.5002601562)):
        with Locations((-26.999999998, -6.35)):
            Circle(F2_R)
        with Locations((74.000000002, -6.35)):
            Circle(F2_R)
    extrude(amount=-F3_DEPTH, mode=Mode.SUBTRACT)

    # F4 (on Front) → F5 (cut)
    with BuildSketch(Plane.XZ):
        with Locations((22.7671675384, -1.0524916817)):
            Rectangle(F4_W, F4_H)
    extrude(amount=F5_DEPTH, mode=Mode.SUBTRACT)

    # F6
    f6_edges = [f1.edges().sort_by_distance(p)[0] for p in [
        (82, -6.35, 41.50026),
        (-35, -6.35, 41.50026),
    ]]
    fillet(f6_edges, radius=F6_R)

    # F7
    f7_edges = [f1.edges().sort_by_distance(p)[0] for p in [
        (-35, -6.35, 1),
        (0.009608, -6.35, 1),
        (46.990392, -6.35, 1),
        (82, -6.35, 1),
    ]]
    fillet(f7_edges, radius=F7_R)

    # F8 (on face) → F9 (cut, through all)
    with BuildSketch(Plane.XZ.offset(12.7)):
        Polygon((-18, 35.0002601562), (-12, 35.0002601562), (-6, 35.0002601562), (-6, 41.5002601562), (-12, 41.5002601562), (-18, 41.5002601562), align=None)
        Polygon((59.0000000039, 35.0002601562), (65.0000000039, 35.0002601562), (65.0000000039, 41.5002601562), (59.0000000039, 41.5002601562), (53.0000000039, 41.5002601562), (53.0000000039, 35.0002601562), align=None)
    extrude(amount=-F9_DEPTH, mode=Mode.SUBTRACT)

    # F10
    f10_edges = [f1.edges().sort_by_distance(p)[0] for p in [
        (-18, -6.35, 35.00026),
        (-6, -6.35, 35.00026),
        (-18, -6.35, 41.50026),
        (-6, -6.35, 41.50026),
        (53, -6.35, 35.00026),
        (53, -6.35, 41.50026),
        (65, -6.35, 35.00026),
        (65, -6.35, 41.50026),
    ]]
    fillet(f10_edges, radius=F10_R)


solid = f1.part
